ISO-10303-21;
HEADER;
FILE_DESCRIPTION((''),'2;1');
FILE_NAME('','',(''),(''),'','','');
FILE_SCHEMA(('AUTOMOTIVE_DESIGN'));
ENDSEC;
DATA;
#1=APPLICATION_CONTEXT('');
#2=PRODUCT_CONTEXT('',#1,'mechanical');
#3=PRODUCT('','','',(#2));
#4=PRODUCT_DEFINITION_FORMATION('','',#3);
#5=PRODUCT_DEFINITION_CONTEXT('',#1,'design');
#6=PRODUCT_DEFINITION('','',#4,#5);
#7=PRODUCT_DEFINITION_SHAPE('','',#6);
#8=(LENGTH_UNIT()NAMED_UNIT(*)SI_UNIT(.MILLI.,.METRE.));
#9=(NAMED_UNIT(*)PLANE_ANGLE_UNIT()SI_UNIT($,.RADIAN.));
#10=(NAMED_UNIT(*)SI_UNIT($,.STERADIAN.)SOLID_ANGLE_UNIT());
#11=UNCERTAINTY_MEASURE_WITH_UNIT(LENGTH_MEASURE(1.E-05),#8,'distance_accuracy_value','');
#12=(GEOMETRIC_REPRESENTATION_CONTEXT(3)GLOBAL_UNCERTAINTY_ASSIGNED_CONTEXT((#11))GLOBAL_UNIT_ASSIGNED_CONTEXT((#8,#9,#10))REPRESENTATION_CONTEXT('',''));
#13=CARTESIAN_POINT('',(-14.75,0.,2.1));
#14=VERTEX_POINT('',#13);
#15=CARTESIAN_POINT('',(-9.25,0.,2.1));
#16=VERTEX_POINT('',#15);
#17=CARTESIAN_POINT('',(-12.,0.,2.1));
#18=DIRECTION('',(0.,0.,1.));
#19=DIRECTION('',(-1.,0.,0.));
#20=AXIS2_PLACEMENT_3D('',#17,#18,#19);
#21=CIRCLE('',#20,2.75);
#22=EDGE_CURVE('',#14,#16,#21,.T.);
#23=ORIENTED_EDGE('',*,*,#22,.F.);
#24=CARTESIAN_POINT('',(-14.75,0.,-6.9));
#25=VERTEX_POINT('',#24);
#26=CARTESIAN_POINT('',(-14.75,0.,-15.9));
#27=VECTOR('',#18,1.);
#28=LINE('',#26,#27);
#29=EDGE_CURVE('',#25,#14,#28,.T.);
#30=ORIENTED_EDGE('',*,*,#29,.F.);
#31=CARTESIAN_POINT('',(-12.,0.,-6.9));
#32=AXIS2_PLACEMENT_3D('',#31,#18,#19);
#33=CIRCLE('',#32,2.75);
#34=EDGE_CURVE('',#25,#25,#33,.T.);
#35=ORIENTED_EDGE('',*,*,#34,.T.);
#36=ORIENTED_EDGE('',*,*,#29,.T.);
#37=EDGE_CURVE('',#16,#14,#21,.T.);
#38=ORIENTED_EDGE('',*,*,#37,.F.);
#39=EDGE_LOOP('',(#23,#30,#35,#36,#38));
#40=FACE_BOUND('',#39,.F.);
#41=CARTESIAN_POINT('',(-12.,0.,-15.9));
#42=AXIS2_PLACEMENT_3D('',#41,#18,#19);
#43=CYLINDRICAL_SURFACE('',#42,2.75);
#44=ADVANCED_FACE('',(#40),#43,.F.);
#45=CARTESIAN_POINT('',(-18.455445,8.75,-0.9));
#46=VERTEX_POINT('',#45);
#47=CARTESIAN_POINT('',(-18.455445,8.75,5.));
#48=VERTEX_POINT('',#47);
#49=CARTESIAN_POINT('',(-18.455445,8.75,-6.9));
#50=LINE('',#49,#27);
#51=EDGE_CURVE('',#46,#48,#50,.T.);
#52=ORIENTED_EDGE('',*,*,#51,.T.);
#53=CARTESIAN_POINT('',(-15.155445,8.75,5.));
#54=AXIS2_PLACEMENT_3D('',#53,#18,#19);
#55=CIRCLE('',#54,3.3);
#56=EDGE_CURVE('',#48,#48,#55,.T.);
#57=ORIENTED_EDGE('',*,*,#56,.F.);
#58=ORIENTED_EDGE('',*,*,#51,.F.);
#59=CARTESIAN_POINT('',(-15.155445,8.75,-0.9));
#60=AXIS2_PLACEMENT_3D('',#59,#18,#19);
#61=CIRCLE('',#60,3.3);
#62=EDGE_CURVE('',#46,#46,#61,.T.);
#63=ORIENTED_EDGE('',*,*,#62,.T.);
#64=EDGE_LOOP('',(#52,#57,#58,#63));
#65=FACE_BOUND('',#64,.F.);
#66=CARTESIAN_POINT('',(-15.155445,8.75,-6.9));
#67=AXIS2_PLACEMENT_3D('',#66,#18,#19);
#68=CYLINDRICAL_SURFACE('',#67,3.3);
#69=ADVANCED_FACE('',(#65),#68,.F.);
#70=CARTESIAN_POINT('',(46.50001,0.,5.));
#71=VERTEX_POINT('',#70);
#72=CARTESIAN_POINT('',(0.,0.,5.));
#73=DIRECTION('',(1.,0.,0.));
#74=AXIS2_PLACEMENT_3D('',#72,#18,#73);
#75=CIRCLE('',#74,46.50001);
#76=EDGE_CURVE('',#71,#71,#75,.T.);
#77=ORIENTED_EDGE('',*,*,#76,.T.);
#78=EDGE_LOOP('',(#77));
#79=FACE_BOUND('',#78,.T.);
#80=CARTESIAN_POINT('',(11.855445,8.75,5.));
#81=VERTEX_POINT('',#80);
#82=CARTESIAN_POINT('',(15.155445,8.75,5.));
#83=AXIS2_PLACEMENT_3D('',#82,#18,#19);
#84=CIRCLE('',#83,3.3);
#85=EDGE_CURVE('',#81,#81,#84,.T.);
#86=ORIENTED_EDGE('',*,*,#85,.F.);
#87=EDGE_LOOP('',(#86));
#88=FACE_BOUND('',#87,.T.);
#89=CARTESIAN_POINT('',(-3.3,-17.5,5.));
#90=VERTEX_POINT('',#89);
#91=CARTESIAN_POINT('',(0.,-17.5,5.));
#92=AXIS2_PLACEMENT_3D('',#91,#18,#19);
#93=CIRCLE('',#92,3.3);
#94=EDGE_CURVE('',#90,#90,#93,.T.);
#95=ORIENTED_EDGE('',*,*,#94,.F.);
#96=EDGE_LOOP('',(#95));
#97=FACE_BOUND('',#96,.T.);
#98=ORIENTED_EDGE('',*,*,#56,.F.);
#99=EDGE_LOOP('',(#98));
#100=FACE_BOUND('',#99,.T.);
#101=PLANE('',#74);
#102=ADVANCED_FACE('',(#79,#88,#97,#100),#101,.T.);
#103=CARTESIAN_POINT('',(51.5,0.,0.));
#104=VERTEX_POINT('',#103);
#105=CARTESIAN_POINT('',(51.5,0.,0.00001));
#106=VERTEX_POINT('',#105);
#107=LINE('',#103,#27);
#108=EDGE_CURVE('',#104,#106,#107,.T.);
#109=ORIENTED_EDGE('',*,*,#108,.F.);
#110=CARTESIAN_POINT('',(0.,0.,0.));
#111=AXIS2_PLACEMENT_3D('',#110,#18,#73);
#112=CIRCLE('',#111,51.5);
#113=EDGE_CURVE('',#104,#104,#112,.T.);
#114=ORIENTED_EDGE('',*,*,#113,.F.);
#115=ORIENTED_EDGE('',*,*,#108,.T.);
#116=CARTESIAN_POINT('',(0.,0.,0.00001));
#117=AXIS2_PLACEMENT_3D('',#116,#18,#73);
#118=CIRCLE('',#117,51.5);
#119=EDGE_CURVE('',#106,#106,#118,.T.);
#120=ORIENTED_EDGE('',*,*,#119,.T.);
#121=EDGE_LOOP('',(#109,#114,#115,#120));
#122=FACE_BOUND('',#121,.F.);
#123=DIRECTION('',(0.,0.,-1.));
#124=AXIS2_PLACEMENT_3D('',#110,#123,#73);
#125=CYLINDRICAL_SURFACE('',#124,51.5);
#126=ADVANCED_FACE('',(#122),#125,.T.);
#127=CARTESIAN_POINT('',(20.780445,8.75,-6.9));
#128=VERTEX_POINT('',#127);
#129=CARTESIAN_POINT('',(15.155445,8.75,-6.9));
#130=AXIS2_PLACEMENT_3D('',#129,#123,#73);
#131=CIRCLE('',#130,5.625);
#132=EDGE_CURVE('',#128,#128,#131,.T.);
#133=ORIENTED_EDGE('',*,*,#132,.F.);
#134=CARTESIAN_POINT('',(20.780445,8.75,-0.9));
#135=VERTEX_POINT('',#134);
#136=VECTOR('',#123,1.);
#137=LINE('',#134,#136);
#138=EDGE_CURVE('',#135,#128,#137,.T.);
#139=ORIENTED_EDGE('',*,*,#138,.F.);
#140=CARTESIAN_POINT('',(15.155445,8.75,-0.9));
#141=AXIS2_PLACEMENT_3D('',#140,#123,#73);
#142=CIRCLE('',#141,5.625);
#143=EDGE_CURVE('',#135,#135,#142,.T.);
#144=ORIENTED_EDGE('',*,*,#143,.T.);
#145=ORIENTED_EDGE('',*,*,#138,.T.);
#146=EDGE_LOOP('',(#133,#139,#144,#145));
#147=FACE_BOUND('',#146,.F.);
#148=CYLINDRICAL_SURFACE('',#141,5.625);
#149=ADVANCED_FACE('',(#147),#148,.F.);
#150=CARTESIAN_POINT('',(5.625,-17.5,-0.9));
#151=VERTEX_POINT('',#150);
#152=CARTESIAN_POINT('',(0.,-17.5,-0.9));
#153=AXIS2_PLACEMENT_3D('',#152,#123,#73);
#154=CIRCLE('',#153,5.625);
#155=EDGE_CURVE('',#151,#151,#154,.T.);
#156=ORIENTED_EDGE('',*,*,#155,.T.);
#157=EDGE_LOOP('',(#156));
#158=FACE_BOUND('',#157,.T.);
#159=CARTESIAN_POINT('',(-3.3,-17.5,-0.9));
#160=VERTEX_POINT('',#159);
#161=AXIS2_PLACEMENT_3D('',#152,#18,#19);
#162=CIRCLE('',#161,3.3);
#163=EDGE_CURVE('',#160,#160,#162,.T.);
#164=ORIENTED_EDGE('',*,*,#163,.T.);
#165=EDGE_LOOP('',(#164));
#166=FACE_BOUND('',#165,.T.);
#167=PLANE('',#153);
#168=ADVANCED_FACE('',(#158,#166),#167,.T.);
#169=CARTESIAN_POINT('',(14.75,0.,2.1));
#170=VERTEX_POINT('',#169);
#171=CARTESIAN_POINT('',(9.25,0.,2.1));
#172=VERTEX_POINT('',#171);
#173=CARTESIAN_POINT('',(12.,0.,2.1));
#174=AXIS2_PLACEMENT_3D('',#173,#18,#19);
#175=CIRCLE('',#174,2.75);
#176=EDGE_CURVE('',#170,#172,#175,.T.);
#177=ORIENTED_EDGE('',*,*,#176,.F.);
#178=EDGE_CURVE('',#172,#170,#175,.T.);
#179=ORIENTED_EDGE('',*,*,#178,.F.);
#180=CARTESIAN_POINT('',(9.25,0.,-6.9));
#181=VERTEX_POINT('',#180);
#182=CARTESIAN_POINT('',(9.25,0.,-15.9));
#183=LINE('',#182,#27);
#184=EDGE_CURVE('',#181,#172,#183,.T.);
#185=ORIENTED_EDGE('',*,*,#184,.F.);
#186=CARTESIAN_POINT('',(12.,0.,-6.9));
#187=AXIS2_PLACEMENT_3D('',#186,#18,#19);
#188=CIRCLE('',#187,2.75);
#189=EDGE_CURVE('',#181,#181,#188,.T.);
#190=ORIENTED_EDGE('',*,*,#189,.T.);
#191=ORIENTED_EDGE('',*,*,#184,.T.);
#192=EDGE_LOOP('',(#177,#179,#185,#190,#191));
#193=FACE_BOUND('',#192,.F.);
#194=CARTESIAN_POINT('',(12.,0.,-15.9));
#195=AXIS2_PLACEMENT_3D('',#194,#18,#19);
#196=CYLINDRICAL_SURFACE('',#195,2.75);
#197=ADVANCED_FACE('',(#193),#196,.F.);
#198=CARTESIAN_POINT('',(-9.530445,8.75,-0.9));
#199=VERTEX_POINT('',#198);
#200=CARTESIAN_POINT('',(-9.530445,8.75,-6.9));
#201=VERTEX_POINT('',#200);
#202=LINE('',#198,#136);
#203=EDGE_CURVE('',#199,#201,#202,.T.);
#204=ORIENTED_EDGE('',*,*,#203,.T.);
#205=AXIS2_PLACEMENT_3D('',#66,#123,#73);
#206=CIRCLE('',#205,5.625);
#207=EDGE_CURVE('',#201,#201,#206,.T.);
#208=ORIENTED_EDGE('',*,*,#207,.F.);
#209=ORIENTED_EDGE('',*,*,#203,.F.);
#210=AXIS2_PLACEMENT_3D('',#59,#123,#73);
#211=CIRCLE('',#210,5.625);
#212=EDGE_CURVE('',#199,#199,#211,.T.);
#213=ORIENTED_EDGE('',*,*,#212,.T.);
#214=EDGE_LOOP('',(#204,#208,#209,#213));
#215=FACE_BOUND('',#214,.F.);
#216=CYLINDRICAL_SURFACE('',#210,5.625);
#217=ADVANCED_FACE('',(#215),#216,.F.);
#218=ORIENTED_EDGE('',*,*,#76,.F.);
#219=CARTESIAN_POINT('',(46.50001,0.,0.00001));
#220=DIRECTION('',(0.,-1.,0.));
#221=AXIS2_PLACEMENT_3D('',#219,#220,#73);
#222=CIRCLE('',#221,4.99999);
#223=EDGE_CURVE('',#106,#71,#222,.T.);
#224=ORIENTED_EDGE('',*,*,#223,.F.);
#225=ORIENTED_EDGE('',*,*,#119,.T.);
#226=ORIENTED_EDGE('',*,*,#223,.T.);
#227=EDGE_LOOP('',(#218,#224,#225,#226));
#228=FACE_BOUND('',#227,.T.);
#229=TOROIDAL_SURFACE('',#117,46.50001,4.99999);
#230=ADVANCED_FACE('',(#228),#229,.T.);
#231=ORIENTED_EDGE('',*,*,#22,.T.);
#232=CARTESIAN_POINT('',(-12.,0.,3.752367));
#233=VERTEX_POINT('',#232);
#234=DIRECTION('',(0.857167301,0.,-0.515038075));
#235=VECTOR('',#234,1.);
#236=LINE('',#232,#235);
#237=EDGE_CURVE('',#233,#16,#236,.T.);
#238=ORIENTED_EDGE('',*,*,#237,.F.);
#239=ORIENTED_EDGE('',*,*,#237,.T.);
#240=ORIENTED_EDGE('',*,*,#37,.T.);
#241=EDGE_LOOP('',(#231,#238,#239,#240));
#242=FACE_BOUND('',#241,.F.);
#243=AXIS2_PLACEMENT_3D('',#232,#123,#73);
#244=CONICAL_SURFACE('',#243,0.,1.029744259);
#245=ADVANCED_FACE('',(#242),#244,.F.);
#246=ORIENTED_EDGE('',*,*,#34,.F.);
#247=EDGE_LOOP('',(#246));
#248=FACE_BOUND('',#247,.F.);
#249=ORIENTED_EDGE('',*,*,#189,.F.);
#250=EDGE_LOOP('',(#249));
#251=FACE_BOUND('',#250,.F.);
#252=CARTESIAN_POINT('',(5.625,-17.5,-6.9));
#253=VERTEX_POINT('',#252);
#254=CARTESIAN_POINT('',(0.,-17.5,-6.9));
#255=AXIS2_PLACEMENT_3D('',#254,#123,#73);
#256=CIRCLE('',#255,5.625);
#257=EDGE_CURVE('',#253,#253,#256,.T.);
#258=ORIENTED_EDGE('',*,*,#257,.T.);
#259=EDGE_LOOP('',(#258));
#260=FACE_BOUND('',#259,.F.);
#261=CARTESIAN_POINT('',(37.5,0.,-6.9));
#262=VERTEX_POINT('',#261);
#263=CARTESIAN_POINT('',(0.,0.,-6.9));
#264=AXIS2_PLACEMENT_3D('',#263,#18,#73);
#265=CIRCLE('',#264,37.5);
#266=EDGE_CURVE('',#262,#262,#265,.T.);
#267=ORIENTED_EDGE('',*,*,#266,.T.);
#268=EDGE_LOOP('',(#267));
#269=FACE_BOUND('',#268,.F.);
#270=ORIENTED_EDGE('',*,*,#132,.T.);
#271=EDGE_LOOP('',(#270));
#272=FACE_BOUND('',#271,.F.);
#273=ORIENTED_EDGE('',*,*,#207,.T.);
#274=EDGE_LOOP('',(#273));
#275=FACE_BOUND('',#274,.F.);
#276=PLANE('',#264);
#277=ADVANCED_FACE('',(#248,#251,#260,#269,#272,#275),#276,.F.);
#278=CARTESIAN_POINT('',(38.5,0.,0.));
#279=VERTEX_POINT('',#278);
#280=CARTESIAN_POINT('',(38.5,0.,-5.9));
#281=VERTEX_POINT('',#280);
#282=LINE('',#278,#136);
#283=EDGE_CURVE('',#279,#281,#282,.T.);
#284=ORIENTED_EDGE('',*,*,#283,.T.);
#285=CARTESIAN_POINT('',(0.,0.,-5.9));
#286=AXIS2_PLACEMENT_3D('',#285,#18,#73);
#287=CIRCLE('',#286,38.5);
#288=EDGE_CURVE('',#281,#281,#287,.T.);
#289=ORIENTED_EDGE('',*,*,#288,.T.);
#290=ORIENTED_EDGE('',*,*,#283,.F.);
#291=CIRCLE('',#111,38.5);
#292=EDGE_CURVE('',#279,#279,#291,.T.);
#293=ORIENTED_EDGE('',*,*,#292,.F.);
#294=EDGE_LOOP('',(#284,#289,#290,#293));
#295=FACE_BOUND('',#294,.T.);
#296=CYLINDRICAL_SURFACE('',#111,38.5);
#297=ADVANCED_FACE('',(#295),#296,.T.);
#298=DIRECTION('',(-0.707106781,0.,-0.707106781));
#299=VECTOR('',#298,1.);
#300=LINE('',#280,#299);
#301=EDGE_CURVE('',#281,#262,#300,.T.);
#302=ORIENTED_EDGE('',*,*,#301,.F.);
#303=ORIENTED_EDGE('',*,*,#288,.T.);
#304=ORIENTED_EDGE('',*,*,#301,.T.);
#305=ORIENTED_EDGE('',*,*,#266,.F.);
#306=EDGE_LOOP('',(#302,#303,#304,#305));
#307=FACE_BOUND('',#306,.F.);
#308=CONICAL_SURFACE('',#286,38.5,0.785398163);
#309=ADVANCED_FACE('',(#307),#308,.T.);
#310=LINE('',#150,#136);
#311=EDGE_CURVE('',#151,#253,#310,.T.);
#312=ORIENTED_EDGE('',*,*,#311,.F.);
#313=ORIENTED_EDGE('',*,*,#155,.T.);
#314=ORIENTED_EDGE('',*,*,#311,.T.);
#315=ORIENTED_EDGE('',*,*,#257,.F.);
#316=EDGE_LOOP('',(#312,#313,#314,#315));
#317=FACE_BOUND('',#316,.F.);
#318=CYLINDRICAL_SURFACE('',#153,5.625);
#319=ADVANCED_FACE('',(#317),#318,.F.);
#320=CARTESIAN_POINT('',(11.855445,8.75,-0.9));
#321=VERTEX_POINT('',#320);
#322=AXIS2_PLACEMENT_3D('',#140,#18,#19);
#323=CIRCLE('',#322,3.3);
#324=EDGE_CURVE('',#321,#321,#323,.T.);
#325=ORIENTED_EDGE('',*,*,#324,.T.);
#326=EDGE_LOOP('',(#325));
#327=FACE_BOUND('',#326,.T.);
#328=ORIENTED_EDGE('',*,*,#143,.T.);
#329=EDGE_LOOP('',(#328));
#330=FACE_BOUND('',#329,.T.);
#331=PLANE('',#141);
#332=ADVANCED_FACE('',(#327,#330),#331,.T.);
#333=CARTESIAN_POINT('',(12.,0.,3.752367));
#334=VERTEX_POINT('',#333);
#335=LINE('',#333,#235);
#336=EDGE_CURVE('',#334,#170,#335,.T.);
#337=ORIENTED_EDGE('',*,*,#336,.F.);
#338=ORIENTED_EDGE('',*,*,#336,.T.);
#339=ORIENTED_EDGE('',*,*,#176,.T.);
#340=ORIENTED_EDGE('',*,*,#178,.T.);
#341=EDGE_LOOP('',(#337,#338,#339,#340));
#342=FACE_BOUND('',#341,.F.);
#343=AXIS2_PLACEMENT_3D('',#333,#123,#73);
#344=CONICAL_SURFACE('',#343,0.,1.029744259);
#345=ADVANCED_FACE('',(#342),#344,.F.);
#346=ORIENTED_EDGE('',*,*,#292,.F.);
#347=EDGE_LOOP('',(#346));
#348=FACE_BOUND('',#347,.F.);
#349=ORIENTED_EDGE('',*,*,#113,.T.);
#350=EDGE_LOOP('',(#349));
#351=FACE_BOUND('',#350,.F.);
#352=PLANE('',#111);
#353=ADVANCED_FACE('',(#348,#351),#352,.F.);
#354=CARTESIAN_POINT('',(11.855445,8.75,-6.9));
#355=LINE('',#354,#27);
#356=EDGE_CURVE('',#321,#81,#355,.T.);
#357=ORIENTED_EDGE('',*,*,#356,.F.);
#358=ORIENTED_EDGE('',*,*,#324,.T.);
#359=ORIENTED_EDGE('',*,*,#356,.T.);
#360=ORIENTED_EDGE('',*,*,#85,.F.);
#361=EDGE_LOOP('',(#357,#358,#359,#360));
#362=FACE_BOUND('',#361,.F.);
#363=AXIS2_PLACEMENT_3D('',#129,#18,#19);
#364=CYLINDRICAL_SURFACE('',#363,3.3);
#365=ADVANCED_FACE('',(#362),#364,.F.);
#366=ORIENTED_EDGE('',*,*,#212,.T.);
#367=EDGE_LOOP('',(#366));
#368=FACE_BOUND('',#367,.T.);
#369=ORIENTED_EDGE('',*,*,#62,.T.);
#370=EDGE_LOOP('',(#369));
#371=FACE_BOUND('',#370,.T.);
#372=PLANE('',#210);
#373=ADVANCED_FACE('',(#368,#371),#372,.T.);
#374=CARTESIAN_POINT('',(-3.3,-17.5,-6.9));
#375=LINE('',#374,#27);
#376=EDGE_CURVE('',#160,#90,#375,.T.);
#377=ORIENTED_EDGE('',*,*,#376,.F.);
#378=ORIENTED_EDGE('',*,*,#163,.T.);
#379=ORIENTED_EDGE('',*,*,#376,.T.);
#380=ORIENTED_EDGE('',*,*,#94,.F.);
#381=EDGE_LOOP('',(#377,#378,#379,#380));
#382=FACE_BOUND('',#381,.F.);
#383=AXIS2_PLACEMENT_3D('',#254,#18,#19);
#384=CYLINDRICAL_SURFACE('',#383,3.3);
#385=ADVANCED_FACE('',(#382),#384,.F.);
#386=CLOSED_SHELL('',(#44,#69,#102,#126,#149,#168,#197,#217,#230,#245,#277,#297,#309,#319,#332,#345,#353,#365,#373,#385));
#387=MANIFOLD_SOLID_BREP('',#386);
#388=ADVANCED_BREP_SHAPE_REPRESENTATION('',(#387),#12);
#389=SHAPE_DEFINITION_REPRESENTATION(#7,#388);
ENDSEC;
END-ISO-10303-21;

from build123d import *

# Parameters (mm, degrees)
F0_R           = 38.5
F1_DEPTH       = 6.9
F0_R_2         = 51.5
F2_DEPTH       = 5
F4_D           = 6.6
F4_CBORE_D     = 11.25
F4_CBORE_DEPTH = 6
F6_D           = 5.5
F6_DEPTH       = 9
F6_TIP         = 1.6523667023
F7_R           = 4.99999
F8_SIZE        = 1


# Not quite as in the source:
# - a fillet or chamfer is up to 0.001 mm smaller than in the source, because OpenCascade refuses the exact size


with BuildPart() as f1:
    # F0 (on Top) → F1 (new body)
    with BuildSketch(Plane.XY):
        Circle(F0_R)
    extrude(amount=-F1_DEPTH)

    # F0 (on Top) → F2 (join)
    with BuildSketch(Plane.XY):
        Circle(F0_R_2)
        Circle(F0_R, mode=Mode.SUBTRACT)
        Circle(F0_R)
    extrude(amount=F2_DEPTH)

    # F4 (through all)
    with Locations(Plane(origin=(0, 0, -6.9), x_dir=(1, 0, 0), z_dir=(0, 0, -1))):
        with Locations((-15.1554445662, -8.75), (0, 17.5), (15.1554445662, -8.75)):
            CounterBoreHole(F4_D / 2, F4_CBORE_D / 2, F4_CBORE_DEPTH)

    # F6
    with Locations(Plane(origin=(0, 0, -6.9), x_dir=(1, 0, 0), z_dir=(0, 0, -1))):
        with Locations((-12, 0), (12, 0)):
            Hole(F6_D / 2, depth=F6_DEPTH)
            with Locations((0, 0, -(F6_DEPTH + F6_TIP / 2))):  # 118° drill point
                Cone(0, F6_D / 2, F6_TIP, mode=Mode.SUBTRACT)

    # F7 (radius 5 in the source; OpenCascade refuses exactly that, so slightly less here)
    f7_edges = [f1.edges().sort_by_distance(p)[0] for p in [
        (-51.5, 0, 5),
    ]]
    fillet(f7_edges, radius=F7_R)

    # F8
    f8_edges = [f1.edges().sort_by_distance(p)[0] for p in [
        (-38.5, 0, -6.9),
    ]]
    chamfer(f8_edges, length=F8_SIZE)


solid = f1.part
